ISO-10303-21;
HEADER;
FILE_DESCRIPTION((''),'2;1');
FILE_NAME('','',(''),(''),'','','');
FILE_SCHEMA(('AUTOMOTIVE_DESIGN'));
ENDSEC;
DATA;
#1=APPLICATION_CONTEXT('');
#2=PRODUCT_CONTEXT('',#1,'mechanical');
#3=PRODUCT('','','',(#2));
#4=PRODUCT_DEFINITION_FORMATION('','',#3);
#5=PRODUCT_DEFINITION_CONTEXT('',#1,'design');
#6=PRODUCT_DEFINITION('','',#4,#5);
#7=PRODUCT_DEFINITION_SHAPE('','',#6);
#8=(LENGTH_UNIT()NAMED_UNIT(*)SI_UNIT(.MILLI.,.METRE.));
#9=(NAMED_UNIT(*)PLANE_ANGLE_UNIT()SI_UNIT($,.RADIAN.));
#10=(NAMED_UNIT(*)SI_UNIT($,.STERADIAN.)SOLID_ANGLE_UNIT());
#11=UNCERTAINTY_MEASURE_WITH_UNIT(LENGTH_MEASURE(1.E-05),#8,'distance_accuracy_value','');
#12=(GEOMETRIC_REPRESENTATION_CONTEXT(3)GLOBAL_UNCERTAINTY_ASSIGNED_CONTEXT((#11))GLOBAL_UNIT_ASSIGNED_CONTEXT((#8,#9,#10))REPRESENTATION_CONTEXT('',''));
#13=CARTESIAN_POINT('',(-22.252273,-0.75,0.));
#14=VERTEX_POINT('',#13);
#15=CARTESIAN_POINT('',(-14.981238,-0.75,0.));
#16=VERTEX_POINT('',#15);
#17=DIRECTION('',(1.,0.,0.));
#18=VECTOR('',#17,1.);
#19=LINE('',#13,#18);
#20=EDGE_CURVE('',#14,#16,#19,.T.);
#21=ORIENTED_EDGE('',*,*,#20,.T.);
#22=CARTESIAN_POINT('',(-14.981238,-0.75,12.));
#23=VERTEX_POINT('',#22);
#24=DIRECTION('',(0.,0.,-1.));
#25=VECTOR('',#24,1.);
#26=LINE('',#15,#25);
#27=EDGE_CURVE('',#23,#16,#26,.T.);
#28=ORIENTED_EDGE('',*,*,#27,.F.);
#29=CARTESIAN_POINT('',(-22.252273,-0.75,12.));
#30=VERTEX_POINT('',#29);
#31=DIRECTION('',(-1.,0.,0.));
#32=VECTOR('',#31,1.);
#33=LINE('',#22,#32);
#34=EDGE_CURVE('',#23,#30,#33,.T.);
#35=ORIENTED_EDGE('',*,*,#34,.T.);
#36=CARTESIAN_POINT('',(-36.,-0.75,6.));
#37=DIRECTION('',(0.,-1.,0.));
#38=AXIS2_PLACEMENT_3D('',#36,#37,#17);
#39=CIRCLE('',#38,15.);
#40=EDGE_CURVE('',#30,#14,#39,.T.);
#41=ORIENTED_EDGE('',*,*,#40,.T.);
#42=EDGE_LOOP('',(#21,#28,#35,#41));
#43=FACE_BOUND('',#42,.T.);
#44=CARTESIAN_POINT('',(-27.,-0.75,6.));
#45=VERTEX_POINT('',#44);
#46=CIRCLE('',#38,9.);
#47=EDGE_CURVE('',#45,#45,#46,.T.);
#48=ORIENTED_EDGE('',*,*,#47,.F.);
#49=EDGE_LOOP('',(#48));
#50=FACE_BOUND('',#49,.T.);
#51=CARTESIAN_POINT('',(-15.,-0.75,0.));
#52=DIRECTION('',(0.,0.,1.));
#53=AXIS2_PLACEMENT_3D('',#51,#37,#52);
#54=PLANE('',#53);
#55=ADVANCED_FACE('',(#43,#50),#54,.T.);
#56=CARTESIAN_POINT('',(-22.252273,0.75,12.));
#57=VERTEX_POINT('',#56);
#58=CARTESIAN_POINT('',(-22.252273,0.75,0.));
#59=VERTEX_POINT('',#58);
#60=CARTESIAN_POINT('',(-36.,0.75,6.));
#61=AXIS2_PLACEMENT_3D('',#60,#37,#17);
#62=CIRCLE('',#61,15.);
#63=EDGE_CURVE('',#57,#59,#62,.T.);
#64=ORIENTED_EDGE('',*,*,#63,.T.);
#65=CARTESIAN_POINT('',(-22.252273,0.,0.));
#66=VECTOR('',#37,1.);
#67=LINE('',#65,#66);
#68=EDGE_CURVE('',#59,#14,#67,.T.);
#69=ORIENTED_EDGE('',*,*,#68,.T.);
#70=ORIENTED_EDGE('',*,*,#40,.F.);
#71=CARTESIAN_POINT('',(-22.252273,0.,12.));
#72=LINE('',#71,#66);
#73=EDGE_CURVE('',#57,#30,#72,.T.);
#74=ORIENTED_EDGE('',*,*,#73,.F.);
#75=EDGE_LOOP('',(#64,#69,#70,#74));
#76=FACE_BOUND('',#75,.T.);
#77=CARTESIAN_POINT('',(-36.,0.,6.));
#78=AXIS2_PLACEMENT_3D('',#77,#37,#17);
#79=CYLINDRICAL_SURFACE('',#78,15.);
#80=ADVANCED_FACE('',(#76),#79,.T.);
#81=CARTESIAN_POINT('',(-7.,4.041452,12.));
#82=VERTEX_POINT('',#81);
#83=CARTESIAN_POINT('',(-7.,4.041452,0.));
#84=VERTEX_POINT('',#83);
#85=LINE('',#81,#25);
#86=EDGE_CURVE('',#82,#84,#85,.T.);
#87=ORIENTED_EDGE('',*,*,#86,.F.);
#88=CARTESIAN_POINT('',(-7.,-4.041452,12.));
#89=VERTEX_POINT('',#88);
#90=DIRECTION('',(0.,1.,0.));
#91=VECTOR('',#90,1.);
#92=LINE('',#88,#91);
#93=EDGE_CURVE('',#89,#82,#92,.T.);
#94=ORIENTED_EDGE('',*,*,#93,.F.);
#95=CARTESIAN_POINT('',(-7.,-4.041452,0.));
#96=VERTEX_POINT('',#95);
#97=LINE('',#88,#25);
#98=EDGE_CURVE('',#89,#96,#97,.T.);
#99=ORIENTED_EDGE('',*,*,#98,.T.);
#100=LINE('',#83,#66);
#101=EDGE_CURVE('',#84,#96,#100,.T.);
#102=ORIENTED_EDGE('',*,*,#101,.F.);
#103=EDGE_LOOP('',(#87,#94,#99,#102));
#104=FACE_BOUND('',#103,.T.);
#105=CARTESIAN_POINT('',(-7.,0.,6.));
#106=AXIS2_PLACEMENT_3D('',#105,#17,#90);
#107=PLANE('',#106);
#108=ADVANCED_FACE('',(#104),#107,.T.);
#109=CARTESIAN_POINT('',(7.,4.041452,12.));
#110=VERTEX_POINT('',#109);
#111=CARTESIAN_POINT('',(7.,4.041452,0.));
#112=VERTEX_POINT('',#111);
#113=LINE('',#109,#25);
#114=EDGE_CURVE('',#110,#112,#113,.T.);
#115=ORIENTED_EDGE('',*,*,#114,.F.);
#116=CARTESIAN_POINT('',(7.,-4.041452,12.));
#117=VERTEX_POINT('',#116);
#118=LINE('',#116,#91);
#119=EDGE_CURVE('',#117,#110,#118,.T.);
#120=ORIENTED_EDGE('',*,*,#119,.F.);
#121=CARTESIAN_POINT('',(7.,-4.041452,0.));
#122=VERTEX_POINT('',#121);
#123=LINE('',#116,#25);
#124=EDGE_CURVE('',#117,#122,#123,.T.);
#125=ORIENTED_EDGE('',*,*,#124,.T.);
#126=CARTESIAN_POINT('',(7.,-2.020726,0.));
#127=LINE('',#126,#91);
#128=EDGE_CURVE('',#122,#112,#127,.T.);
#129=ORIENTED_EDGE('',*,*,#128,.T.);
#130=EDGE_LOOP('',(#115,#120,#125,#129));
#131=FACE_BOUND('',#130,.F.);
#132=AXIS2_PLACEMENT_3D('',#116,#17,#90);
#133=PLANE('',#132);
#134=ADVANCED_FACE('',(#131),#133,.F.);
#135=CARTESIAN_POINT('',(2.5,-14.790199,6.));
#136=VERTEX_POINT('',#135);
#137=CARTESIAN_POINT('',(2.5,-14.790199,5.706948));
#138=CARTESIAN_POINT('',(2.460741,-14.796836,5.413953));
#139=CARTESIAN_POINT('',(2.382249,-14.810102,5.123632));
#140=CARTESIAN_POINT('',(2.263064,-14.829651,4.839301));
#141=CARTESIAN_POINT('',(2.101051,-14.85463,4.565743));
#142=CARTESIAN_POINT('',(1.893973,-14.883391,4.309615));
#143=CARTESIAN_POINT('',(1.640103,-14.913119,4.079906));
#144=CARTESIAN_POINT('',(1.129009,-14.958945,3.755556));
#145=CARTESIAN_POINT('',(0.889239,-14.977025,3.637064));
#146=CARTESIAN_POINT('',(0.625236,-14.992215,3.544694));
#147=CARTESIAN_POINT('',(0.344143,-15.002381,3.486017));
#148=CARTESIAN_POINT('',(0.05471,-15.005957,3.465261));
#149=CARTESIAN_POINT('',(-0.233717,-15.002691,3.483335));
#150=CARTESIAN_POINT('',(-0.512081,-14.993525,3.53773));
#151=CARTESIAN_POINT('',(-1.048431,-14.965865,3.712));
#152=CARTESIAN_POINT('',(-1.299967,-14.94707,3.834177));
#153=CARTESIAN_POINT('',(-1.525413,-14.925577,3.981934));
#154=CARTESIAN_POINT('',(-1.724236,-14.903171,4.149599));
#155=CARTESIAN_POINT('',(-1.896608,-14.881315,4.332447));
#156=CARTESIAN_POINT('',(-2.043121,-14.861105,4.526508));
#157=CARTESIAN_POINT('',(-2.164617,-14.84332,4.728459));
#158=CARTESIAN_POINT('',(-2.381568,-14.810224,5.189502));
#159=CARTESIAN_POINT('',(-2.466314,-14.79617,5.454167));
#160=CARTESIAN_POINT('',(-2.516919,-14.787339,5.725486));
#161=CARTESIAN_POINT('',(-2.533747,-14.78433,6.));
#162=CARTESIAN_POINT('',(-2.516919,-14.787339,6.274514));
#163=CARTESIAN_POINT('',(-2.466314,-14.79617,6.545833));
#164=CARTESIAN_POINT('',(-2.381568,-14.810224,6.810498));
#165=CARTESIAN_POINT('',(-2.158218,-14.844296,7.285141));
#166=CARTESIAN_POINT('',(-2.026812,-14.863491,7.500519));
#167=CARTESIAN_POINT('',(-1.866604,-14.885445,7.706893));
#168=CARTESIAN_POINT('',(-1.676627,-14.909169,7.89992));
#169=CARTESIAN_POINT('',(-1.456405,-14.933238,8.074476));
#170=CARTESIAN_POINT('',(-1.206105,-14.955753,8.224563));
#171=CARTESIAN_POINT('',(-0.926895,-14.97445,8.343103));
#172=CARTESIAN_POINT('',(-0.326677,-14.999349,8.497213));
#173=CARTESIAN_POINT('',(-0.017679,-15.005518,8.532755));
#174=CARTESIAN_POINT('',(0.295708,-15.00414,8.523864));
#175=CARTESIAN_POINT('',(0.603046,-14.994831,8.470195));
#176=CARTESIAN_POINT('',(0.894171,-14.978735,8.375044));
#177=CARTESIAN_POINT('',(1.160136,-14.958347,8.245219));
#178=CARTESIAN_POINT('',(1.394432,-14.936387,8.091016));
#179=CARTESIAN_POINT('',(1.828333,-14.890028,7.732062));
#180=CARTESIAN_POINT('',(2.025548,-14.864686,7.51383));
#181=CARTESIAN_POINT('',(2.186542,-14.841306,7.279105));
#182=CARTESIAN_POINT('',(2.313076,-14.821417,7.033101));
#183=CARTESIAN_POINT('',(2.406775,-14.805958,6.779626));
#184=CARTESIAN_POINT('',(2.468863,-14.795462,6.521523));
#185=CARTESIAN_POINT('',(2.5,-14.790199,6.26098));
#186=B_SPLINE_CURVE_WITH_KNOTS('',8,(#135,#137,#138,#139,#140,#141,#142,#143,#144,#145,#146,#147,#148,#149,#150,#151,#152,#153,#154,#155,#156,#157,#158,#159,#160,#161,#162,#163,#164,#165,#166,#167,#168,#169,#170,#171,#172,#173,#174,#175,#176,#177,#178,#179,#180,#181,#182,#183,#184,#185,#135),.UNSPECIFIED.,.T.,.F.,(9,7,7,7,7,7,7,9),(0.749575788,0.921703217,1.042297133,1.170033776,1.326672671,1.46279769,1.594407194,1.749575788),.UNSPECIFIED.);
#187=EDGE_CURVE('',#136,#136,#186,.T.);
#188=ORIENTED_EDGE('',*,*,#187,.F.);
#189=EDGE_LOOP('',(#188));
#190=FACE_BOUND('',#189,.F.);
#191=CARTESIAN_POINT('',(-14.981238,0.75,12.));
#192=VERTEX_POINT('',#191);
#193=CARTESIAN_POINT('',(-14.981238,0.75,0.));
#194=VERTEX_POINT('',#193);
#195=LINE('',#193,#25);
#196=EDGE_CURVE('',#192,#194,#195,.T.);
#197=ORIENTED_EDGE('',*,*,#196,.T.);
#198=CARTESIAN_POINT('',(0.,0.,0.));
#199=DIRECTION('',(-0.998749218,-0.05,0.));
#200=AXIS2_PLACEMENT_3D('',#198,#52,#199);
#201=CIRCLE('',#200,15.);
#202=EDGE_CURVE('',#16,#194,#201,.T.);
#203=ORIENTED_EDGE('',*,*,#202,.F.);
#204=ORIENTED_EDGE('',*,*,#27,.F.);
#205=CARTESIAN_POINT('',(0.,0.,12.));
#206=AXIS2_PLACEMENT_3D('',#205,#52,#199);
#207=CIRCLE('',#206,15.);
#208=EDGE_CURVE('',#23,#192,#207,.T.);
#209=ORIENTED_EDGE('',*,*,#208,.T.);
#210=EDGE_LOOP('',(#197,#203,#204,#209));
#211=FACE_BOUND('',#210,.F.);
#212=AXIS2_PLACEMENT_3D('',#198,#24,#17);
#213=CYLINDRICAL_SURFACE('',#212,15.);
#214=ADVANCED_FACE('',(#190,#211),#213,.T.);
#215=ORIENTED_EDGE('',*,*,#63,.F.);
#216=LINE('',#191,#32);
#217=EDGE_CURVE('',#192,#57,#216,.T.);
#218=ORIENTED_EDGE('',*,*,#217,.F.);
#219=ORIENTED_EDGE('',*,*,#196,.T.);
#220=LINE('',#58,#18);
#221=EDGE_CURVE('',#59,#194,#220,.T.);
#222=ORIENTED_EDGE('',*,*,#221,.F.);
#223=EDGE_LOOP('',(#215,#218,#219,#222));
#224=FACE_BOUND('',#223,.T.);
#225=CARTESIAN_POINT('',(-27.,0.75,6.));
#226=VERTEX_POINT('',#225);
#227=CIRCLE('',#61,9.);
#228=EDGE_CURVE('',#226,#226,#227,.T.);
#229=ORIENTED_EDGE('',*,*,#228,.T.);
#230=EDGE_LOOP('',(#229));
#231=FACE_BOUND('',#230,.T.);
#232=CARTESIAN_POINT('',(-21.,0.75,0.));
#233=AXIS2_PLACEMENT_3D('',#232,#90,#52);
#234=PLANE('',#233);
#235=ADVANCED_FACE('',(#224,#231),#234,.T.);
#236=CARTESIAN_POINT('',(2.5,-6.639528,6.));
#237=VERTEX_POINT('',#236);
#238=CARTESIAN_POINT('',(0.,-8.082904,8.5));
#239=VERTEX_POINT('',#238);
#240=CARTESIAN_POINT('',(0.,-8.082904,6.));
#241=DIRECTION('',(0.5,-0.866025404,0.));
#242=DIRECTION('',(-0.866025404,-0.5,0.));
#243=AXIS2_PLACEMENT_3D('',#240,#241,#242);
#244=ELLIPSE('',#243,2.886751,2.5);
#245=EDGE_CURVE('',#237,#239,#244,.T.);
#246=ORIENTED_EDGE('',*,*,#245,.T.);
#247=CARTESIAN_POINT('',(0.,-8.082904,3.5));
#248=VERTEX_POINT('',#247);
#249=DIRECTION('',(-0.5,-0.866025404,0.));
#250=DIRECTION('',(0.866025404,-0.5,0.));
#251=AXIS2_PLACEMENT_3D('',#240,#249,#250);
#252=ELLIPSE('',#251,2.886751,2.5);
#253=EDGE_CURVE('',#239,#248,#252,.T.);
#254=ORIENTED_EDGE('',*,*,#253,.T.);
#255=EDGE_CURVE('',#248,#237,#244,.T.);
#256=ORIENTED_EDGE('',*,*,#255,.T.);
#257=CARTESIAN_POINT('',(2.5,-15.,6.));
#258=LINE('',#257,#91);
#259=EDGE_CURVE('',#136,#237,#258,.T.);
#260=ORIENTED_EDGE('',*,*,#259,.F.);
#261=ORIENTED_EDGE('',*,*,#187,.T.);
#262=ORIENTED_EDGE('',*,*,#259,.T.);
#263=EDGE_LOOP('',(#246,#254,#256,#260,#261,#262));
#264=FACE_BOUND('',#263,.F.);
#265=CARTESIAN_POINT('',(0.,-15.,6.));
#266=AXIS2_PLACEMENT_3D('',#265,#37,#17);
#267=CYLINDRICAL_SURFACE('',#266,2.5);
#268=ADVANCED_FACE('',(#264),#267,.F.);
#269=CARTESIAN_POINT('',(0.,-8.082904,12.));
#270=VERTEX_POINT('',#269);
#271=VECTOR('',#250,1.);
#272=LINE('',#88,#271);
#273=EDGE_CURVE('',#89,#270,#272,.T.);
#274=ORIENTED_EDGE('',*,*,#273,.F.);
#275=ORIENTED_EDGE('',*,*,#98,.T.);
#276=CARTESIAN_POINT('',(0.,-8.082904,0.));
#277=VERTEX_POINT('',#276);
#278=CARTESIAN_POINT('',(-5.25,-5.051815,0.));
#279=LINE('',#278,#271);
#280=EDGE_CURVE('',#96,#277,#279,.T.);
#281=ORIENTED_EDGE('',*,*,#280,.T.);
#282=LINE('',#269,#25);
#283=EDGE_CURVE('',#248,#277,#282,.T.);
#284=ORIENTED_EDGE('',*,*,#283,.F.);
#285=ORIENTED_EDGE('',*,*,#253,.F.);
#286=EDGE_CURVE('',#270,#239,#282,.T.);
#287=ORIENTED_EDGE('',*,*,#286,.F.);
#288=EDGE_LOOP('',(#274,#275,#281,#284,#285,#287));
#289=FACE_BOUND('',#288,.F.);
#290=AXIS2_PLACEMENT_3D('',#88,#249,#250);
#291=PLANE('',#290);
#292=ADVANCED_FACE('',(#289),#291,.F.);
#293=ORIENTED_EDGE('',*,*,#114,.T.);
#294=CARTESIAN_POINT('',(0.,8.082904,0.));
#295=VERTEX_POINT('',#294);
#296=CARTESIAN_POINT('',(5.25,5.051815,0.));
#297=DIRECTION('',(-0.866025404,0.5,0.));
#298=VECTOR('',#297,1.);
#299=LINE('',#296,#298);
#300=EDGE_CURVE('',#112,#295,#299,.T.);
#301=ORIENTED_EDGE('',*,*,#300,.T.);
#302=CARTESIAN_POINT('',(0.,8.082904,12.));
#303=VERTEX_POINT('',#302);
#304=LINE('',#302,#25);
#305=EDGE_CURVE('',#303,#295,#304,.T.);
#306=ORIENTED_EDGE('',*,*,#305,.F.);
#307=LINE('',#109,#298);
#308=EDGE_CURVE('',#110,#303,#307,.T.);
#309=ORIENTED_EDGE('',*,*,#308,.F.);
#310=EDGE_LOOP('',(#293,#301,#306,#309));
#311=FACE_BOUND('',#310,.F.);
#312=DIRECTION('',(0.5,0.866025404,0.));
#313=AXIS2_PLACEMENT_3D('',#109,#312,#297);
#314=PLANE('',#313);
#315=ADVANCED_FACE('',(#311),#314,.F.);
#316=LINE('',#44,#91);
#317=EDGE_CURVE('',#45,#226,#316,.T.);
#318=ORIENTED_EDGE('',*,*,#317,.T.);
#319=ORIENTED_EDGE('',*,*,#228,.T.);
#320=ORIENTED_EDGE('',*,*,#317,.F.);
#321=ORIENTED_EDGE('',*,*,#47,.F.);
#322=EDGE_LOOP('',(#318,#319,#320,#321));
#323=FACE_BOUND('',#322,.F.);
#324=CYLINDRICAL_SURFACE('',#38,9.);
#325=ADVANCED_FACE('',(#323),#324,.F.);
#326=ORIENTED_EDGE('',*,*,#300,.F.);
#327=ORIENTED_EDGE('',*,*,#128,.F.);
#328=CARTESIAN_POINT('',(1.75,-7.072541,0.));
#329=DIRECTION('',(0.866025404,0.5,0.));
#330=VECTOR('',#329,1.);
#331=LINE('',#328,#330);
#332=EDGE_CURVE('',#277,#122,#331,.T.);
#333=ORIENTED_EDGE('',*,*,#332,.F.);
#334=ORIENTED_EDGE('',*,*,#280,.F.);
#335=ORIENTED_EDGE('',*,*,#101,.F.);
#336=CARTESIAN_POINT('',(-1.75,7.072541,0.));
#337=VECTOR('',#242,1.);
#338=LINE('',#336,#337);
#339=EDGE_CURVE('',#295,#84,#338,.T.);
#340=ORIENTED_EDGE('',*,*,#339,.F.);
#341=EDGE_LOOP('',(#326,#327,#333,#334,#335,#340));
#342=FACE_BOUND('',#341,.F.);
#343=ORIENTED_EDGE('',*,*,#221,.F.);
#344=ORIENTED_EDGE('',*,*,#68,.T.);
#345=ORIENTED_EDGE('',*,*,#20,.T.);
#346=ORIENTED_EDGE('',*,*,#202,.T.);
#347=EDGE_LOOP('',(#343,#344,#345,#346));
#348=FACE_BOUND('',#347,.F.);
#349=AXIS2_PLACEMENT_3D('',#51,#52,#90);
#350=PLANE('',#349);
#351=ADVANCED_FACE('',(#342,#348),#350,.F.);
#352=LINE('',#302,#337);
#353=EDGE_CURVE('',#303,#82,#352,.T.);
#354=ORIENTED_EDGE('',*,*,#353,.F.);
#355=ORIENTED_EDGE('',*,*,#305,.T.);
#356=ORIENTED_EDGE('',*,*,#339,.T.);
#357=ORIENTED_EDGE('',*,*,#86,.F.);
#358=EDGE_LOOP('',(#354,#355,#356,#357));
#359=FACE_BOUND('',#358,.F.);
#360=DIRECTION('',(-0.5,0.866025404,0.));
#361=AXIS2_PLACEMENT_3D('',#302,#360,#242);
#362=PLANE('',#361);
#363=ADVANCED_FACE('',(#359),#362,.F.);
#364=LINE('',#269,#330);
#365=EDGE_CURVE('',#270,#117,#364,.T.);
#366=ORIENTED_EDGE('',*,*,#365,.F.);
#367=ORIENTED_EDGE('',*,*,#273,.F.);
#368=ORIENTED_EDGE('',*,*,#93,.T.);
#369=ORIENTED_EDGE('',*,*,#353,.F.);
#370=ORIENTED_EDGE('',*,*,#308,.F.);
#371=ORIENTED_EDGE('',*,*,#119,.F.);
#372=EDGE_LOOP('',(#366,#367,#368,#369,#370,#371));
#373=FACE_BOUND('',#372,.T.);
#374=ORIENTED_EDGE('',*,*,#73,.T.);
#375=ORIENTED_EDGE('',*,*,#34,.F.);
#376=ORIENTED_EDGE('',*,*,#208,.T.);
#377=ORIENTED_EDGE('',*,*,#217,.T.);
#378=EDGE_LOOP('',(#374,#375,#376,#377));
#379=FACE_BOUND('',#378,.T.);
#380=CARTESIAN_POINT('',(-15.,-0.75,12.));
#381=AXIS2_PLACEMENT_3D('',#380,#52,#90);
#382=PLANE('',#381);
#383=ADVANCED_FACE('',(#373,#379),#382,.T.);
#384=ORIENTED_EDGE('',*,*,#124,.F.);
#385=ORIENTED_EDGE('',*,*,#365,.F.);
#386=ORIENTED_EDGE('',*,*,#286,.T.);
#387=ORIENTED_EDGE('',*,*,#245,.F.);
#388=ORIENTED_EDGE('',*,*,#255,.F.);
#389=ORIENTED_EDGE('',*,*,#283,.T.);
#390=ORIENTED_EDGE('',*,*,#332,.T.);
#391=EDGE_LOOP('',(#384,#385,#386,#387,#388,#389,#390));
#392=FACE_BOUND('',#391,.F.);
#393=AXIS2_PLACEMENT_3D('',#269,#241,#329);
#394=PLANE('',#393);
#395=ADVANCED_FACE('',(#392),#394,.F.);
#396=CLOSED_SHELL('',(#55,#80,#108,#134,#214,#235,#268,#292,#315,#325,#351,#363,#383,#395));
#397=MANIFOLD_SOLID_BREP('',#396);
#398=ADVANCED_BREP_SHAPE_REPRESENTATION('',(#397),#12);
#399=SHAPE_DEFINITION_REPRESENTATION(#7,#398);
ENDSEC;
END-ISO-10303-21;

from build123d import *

# Parameters (mm, degrees)
F0_R      = 15
F1_DEPTH  = 12
F3_DEPTH  = 12.001
F4_R      = 15
F5_DEPTH  = 0.75
F6_R      = 9
F7_DEPTH  = 15.751
F9_R      = 2.5
F10_DEPTH = 12
F11_W     = 1.5
F11_H     = 12
F12_REACH = 42.0943866224
F13_W     = 1.5
F13_H     = 12
F14_DEPTH = 8


with BuildPart() as f1:
    # F0 (on Top) → F1 (new body)
    with BuildSketch(Plane.XY):
        Circle(F0_R)
    extrude(amount=F1_DEPTH)

    # F2 (on face) → F3 (cut, through all)
    with BuildSketch(Plane.XY.offset(12)):
        Polygon((7, -4.0414518843), (7, 4.0414518843), (0, 8.0829037687), (-7, 4.0414518843), (-7, -4.0414518843), (0, -8.0829037687), align=None)
    extrude(amount=-F3_DEPTH, mode=Mode.SUBTRACT)

    # F9 (on offset) → F10 (cut)
    with BuildSketch(Plane.XZ.offset(15)):
        with Locations((0, 6)):
            Circle(F9_R)
    extrude(amount=-F10_DEPTH, mode=Mode.SUBTRACT)



with BuildPart() as f5:
    # F4 (on Front) → F5 (new body, symmetric)
    with BuildSketch(Plane.XZ):
        with Locations((-36, 6)):
            Circle(F4_R)
    extrude(amount=F5_DEPTH, both=True)

    # F6 (on face) → F7 (cut, through all)
    with BuildSketch(Plane.XZ.offset(0.75)):
        with Locations((-36, 6)):
            Circle(F6_R)
    extrude(amount=-F7_DEPTH, mode=Mode.SUBTRACT)



with BuildPart() as f5b:
    # F4 (on Front) → F5, piece 2 (new body, symmetric)
    with BuildSketch(Plane.XZ):
        Polygon((-21, 0), (-15, 0), (-15, 12), (-21, 12), (-21, 6), align=None)
    extrude(amount=F5_DEPTH, both=True)


with BuildPart() as f5_1:
    add(f5.part)

    add(f5b.part)  # F12 merges F5b
    f12_end = f5_1.faces().sort_by_distance((-45, 0, 6))[0]
    # F11 (on face) → F12 (join, up to a face of the model that its end follows)
    with BuildSketch(Plane(origin=(-21, 0, 0), x_dir=(0, -1, 0), z_dir=(-1, 0, 0))):
        with Locations((0, 6)):
            Rectangle(F11_W, F11_H)
    f12_long = extrude(amount=F12_REACH, mode=Mode.PRIVATE)
    add(split(f12_long, bisect_by=f12_end, keep=Keep.ALL, mode=Mode.PRIVATE).solids().sort_by_distance((-21, 0, 6))[0])


with BuildPart() as f1_1:
    add(f1.part)

    add(f5_1.part)  # F14 merges F5
    # F13 (on face) → F14 (join, through all)
    with BuildSketch(Plane.YZ.offset(-15)):
        with Locations((0, 6)):
            Rectangle(F13_W, F13_H)
    extrude(amount=F14_DEPTH)


solid = f1_1.part
